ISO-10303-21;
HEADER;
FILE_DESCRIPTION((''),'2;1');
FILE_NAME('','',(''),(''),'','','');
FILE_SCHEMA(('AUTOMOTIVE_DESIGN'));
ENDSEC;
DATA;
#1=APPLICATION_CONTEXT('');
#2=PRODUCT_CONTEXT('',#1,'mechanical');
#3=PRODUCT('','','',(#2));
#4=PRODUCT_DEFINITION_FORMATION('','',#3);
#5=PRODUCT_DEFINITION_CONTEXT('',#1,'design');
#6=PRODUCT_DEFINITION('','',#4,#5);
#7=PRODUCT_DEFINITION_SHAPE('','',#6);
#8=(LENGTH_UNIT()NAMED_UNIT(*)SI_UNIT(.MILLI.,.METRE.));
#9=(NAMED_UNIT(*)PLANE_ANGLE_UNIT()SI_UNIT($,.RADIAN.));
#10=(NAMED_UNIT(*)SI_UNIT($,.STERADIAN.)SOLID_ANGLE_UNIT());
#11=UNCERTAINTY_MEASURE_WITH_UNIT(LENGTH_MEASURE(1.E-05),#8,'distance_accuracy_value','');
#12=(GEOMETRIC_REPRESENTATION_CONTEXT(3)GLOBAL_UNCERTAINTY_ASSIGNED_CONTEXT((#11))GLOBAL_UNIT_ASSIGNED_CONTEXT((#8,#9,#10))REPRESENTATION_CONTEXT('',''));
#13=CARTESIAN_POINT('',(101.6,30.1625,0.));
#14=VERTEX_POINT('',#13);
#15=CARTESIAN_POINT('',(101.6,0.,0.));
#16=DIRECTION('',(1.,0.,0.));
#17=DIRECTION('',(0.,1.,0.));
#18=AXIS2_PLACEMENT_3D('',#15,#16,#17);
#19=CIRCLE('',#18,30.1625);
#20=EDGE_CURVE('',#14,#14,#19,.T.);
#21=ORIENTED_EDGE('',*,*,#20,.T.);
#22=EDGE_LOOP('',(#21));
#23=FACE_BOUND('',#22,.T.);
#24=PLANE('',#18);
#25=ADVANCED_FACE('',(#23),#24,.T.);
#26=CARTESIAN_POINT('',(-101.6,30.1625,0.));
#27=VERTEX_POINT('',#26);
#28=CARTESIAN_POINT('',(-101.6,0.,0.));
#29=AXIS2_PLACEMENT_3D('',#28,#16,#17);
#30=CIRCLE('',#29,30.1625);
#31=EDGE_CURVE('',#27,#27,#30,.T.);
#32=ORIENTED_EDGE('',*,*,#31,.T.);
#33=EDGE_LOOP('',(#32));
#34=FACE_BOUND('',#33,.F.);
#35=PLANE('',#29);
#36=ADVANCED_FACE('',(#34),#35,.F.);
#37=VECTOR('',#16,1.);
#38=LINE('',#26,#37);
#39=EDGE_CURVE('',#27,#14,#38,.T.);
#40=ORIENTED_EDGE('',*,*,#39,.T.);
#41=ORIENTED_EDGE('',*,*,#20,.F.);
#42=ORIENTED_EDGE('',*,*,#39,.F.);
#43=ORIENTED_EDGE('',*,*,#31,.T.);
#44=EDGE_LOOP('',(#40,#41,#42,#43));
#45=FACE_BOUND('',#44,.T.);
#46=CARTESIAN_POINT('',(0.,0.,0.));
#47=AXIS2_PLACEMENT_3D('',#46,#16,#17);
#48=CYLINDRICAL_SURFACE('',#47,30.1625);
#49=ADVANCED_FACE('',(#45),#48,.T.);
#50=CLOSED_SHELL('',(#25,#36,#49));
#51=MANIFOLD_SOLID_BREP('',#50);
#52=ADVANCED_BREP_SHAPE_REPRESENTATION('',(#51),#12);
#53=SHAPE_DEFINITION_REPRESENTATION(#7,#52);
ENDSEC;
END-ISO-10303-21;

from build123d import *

# Parameters (mm, degrees)
F1_R     = 30.1625
F2_DEPTH = 101.6


# Not quite as in the source:
# - a variable given as a bare number and used for a length is read in inches; the dataset says mm whatever the document's units were


with BuildPart() as f2:
    # F1 (on Right) → F2 (new body, symmetric)
    with BuildSketch(Plane.YZ):
        Circle(F1_R)
    extrude(amount=F2_DEPTH, both=True)


solid = f2.part
